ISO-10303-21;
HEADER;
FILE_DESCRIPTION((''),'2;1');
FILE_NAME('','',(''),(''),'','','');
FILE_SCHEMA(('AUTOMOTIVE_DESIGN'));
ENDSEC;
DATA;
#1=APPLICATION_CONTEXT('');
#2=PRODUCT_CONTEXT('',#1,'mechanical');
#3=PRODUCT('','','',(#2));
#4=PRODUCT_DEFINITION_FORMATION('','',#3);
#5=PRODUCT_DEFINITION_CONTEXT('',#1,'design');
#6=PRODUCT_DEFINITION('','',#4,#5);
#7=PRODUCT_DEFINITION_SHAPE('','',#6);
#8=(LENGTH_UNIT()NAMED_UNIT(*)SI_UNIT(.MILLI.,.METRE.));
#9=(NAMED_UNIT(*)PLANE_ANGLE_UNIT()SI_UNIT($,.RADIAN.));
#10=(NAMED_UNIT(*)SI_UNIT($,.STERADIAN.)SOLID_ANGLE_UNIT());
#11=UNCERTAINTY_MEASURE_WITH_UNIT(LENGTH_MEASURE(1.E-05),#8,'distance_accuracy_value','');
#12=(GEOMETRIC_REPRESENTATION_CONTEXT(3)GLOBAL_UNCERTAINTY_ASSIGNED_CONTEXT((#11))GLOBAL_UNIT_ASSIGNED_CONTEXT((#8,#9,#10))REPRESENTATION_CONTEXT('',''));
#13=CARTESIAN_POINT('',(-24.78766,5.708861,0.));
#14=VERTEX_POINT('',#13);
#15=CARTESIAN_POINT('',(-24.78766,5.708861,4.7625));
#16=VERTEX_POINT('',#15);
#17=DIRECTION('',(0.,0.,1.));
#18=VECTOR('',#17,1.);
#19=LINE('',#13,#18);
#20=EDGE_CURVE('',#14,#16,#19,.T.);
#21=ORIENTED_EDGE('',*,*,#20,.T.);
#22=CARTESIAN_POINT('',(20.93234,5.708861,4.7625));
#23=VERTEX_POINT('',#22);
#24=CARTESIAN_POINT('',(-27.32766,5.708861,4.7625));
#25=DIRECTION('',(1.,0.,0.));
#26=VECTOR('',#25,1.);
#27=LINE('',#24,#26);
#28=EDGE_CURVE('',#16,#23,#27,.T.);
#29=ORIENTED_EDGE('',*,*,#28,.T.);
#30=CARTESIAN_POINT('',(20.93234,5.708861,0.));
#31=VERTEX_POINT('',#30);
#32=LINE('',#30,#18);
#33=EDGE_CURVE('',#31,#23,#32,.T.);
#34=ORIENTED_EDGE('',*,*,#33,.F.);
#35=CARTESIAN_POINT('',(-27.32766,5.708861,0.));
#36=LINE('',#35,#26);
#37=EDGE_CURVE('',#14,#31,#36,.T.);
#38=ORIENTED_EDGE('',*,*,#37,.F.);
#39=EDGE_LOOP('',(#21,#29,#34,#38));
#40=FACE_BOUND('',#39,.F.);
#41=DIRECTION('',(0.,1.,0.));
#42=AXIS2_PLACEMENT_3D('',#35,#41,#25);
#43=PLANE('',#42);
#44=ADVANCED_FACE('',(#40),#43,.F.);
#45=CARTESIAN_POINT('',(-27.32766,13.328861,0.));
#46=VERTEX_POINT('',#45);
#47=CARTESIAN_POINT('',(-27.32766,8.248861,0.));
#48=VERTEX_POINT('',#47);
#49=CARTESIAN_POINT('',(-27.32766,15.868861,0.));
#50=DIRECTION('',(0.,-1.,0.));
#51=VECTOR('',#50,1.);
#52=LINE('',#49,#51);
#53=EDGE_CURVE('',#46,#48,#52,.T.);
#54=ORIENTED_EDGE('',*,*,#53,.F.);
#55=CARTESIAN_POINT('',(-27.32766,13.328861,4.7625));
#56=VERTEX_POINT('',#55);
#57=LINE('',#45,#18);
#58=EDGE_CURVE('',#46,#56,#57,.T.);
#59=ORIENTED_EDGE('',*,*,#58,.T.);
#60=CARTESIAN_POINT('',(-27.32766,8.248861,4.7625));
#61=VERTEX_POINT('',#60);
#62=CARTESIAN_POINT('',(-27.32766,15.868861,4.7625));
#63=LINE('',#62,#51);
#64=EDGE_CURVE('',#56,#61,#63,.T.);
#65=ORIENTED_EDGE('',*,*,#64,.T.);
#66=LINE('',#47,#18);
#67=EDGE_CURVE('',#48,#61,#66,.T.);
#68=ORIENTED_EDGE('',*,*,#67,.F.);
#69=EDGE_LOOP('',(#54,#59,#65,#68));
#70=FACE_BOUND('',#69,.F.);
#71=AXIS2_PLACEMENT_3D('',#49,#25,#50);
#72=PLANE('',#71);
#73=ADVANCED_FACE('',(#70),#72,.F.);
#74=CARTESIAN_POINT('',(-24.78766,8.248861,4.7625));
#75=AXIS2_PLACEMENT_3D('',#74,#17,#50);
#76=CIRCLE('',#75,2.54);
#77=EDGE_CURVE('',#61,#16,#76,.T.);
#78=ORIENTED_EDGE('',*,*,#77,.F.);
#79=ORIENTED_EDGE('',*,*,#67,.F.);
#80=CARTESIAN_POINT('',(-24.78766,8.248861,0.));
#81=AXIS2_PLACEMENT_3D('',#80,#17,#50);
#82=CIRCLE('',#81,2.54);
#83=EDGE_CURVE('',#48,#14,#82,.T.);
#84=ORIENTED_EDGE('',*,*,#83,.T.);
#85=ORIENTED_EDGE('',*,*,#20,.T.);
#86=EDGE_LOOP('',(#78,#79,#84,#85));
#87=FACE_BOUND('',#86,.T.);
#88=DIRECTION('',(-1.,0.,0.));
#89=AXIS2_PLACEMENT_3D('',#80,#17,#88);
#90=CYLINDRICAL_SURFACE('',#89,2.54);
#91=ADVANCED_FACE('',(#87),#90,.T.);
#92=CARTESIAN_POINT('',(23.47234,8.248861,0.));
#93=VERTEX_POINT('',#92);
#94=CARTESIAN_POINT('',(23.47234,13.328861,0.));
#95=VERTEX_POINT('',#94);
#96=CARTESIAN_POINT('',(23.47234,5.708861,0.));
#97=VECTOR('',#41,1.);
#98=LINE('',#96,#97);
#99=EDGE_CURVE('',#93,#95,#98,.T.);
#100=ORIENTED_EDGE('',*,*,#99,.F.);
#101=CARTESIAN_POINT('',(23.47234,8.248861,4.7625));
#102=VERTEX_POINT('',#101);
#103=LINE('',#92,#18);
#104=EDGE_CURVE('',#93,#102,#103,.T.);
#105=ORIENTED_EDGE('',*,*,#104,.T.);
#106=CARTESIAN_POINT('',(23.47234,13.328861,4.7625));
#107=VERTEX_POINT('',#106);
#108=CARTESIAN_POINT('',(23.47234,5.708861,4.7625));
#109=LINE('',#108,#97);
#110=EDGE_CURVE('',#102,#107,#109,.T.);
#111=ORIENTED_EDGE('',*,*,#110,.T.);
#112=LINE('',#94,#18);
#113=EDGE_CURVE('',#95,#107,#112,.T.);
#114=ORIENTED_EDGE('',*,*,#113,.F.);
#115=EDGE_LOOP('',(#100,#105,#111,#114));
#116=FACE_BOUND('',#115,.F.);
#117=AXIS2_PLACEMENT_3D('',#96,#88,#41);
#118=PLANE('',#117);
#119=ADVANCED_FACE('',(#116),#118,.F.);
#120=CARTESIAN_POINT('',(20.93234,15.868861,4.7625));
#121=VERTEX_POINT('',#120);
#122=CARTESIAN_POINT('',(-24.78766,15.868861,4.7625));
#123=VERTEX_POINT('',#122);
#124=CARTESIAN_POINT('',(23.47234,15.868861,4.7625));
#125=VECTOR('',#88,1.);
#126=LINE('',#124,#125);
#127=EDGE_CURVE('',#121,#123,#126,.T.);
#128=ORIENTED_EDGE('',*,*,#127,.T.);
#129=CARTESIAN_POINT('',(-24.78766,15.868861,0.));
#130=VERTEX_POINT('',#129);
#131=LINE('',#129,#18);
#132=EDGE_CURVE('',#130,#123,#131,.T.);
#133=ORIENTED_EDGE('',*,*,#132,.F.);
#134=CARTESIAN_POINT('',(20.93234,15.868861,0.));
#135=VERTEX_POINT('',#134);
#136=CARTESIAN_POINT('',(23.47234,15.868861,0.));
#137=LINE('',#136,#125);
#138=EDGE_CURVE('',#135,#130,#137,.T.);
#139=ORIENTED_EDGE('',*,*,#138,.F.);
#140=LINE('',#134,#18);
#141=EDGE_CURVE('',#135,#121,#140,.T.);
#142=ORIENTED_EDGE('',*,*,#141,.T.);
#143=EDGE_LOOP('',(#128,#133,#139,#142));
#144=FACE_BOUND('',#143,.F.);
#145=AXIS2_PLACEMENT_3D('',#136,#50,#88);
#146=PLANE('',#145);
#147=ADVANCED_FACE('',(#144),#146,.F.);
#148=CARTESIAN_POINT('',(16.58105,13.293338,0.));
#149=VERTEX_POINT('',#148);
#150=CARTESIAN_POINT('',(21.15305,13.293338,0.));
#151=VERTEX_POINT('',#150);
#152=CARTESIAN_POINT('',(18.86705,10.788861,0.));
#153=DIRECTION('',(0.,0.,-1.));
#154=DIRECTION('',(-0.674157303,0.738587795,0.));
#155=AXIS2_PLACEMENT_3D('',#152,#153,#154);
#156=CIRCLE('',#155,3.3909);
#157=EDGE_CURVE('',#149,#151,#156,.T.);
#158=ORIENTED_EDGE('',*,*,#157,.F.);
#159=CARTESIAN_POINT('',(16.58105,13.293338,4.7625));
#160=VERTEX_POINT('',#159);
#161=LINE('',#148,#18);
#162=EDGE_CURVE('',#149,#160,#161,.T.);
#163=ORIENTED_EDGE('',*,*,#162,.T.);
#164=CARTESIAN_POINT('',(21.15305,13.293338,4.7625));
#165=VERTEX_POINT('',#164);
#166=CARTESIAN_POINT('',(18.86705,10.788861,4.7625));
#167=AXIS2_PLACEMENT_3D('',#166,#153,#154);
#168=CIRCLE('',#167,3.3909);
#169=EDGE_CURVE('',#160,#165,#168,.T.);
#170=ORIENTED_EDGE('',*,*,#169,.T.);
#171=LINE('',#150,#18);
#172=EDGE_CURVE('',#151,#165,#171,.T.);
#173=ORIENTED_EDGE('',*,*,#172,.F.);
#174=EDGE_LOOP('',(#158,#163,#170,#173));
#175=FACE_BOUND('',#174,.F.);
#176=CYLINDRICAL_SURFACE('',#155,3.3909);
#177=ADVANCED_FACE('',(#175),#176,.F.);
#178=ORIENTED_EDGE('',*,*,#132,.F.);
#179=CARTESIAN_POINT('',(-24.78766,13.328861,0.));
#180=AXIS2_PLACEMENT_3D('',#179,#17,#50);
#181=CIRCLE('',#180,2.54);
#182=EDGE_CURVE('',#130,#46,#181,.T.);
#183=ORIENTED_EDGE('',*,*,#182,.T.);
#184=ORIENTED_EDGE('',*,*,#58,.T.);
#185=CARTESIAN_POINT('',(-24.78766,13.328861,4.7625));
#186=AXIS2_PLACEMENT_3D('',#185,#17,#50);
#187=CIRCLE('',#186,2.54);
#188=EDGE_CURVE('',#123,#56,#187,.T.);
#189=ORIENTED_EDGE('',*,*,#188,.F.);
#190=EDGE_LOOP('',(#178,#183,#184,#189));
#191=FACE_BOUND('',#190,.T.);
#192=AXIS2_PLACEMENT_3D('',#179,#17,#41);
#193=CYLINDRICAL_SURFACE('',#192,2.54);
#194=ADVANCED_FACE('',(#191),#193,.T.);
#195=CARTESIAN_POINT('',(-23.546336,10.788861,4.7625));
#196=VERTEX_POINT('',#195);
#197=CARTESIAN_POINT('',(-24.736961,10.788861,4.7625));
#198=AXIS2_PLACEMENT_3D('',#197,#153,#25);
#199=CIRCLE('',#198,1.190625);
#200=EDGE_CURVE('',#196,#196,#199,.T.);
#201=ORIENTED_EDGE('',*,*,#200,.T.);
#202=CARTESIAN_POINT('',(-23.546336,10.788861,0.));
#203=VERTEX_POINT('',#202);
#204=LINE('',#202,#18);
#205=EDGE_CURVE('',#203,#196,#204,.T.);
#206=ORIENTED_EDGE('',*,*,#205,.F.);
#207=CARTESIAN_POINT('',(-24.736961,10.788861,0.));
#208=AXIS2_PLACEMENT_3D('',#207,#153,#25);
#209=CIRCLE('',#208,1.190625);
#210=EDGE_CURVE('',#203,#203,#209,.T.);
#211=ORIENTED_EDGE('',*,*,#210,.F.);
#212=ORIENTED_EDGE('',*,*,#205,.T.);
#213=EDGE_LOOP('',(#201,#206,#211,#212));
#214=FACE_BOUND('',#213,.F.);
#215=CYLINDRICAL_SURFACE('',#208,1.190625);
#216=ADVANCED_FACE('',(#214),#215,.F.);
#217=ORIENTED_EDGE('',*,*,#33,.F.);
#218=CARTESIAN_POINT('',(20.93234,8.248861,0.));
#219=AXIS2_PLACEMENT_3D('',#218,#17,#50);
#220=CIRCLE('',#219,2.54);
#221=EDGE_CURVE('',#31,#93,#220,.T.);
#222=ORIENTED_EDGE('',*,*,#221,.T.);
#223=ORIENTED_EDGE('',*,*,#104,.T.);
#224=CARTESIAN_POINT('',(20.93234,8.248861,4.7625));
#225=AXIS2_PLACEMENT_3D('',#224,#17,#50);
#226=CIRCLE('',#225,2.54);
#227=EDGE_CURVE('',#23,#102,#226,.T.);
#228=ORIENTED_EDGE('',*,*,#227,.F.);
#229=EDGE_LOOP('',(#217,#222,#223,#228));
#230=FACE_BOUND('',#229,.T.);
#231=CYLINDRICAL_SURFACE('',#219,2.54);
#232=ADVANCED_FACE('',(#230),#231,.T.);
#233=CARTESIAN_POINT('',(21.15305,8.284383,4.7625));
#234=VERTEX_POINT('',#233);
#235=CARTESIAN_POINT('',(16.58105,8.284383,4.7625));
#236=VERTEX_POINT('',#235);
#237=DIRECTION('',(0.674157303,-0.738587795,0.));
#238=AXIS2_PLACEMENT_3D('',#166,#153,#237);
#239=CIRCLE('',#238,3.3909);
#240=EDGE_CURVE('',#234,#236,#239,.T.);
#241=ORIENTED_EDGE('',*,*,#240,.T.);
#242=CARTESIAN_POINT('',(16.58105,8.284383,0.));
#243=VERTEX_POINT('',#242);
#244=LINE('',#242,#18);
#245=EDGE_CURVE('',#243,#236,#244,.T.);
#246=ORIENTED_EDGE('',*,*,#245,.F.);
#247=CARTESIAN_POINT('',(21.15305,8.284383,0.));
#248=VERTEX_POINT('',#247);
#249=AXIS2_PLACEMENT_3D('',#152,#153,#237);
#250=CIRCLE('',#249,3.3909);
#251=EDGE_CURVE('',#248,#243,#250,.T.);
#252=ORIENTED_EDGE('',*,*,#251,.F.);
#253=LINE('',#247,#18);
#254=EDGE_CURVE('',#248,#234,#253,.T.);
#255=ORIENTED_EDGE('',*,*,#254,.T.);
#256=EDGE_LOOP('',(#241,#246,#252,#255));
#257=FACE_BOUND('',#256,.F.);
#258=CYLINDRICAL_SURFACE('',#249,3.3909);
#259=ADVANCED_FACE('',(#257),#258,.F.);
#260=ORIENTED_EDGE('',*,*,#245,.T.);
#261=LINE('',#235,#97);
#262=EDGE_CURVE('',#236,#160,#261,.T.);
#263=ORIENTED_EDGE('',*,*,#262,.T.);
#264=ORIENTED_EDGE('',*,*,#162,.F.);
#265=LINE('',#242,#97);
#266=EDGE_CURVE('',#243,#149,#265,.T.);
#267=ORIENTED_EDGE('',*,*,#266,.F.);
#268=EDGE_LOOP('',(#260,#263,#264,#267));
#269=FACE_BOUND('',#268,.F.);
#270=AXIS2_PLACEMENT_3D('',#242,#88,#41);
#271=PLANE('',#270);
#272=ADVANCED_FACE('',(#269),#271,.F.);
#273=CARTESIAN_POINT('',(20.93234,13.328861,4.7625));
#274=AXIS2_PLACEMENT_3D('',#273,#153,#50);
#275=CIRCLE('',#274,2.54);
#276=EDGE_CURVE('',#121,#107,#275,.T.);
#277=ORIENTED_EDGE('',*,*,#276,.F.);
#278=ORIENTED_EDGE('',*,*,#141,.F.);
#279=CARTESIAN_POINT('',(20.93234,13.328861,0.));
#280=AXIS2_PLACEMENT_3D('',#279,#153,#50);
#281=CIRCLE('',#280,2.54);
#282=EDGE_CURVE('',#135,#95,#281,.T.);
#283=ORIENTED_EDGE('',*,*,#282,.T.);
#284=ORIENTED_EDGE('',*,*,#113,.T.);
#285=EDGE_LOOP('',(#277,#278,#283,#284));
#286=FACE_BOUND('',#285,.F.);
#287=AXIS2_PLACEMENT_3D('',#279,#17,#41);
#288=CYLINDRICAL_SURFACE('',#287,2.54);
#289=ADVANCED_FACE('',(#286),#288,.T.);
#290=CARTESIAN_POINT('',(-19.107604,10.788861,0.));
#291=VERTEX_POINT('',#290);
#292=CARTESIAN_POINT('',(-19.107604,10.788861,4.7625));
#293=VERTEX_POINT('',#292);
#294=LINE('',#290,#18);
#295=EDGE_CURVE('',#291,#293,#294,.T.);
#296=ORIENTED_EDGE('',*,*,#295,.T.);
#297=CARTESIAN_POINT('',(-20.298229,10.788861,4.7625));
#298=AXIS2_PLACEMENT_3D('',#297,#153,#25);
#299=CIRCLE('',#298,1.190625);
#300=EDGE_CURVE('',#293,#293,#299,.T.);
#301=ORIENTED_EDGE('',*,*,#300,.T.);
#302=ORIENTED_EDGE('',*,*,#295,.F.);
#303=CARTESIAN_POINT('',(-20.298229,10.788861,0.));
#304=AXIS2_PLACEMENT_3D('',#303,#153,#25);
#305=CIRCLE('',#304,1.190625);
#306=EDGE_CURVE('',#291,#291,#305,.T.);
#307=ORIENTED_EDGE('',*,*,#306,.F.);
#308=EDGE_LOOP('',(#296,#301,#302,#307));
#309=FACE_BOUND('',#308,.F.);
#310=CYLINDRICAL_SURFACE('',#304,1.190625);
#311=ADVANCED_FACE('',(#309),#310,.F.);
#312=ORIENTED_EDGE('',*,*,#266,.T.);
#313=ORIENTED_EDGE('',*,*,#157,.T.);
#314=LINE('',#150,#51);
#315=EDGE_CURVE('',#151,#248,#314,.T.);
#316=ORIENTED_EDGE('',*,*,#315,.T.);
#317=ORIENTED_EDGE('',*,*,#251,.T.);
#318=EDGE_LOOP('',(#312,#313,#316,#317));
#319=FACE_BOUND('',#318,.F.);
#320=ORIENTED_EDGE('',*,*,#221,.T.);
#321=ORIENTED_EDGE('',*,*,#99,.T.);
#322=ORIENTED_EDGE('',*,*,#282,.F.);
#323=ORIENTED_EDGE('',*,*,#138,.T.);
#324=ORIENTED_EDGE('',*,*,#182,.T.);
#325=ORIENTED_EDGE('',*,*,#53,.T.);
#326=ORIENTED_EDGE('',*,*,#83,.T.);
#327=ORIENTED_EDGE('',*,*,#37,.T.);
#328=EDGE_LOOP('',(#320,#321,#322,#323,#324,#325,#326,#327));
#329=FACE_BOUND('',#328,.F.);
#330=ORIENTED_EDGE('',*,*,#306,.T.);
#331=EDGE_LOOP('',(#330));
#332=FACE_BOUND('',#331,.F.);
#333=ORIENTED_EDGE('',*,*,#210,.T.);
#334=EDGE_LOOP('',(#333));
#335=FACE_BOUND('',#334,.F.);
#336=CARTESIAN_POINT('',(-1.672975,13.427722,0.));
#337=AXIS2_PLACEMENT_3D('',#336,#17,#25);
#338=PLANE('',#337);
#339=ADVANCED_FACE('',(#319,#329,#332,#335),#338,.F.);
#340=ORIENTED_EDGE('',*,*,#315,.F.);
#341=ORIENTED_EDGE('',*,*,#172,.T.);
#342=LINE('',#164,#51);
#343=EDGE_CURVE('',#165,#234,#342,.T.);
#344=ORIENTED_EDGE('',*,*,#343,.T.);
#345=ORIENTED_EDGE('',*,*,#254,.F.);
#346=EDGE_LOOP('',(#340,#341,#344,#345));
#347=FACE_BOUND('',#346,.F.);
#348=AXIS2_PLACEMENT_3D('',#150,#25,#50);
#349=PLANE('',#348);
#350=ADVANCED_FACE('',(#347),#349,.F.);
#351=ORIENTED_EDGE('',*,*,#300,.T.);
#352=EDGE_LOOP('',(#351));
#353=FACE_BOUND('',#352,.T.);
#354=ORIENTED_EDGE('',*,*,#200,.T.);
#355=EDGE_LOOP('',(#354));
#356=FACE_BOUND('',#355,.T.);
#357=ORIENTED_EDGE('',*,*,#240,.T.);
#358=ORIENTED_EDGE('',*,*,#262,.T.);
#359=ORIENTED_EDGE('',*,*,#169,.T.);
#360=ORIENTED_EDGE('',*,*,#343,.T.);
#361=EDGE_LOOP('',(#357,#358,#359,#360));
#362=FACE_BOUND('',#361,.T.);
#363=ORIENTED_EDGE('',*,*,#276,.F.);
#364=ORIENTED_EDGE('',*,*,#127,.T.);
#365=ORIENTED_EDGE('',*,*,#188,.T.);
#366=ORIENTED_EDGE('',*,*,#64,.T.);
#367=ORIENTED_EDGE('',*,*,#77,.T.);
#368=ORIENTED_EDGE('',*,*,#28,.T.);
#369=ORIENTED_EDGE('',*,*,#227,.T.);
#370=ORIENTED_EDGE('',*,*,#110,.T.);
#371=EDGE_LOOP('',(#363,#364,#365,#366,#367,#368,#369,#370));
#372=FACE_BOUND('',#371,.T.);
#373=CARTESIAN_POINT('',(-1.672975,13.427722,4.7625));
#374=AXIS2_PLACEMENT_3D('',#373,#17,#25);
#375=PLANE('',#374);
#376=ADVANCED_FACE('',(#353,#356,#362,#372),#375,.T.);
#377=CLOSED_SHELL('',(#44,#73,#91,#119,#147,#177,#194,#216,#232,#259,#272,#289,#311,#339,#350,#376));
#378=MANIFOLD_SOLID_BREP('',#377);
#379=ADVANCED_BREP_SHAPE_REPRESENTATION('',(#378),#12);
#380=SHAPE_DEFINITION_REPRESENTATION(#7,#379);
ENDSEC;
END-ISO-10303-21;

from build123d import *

# Parameters (mm, degrees)
F1_DEPTH = 4.7625
F2_R     = 2.54


# Not quite as in the source:
# - a length typed as a fraction of an inch, garbled in the dataset ("3 / 203.2 mm" for 3/8 in), is restored


with BuildPart() as f1:
    # F0 (on Top) → F1 (new body)
    with BuildSketch(Plane.XY):
        with BuildLine():
            Line((23.4723398992, 10.7888607308), (23.4723398992, 15.8688607308))
            Line((23.4723398992, 15.8688607308), (-27.3276601008, 15.8688607308))
            Line((-27.3276601008, 15.8688607308), (-27.3276601008, 10.7888607308))
            Line((-27.3276601008, 10.7888607308), (-25.9275856725, 10.7888607308))
            ThreePointArc((-25.9275856725, 10.7888607308), (-24.7369606725, 11.9794857308), (-23.5463356725, 10.7888607308))
            Line((-23.5463356725, 10.7888607308), (-21.4888538531, 10.7888607308))
            ThreePointArc((-21.4888538531, 10.7888607308), (-20.2982288531, 11.9794857308), (-19.1076038531, 10.7888607308))
            Line((-19.1076038531, 10.7888607308), (15.4761500436, 10.7888607308))
            ThreePointArc((15.4761500436, 10.7888607308), (15.7646477316, 12.1575472198), (16.5810500436, 13.2933380835))
            ThreePointArc((16.5810500436, 13.2933380835), (18.8670500436, 14.1797607308), (21.1530500436, 13.2933380835))
            ThreePointArc((21.1530500436, 13.2933380835), (21.9694523555, 12.1575472198), (22.2579500436, 10.7888607308))
            Line((22.2579500436, 10.7888607308), (23.4723398992, 10.7888607308))
        make_face()
        with BuildLine():
            Line((23.4723398992, 5.7088607308), (23.4723398992, 10.7888607308))
            Line((23.4723398992, 10.7888607308), (22.2579500436, 10.7888607308))
            ThreePointArc((22.2579500436, 10.7888607308), (21.9694523555, 9.4201742419), (21.1530500436, 8.2843833782))
            ThreePointArc((21.1530500436, 8.2843833782), (18.8670500436, 7.3979607308), (16.5810500436, 8.2843833782))
            ThreePointArc((16.5810500436, 8.2843833782), (15.7646477316, 9.4201742419), (15.4761500436, 10.7888607308))
            Line((15.4761500436, 10.7888607308), (-19.1076038531, 10.7888607308))
            ThreePointArc((-19.1076038531, 10.7888607308), (-20.2982288531, 9.5982357308), (-21.4888538531, 10.7888607308))
            Line((-21.4888538531, 10.7888607308), (-23.5463356725, 10.7888607308))
            ThreePointArc((-23.5463356725, 10.7888607308), (-24.7369606725, 9.5982357308), (-25.9275856725, 10.7888607308))
            Line((-25.9275856725, 10.7888607308), (-27.3276601008, 10.7888607308))
            Line((-27.3276601008, 10.7888607308), (-27.3276601008, 5.7088607308))
            Line((-27.3276601008, 5.7088607308), (23.4723398992, 5.7088607308))
        make_face()
        with BuildLine():
            Line((16.5810500436, 8.2843833782), (16.5810500436, 10.7888607308))
            Line((16.5810500436, 10.7888607308), (15.4761500436, 10.7888607308))
            ThreePointArc((15.4761500436, 10.7888607308), (15.7646477316, 9.4201742419), (16.5810500436, 8.2843833782))
        make_face()
        with BuildLine():
            Line((15.4761500436, 10.7888607308), (16.5810500436, 10.7888607308))
            Line((16.5810500436, 10.7888607308), (16.5810500436, 13.2933380835))
            ThreePointArc((16.5810500436, 13.2933380835), (15.7646477316, 12.1575472198), (15.4761500436, 10.7888607308))
        make_face()
        with BuildLine():
            Line((21.1530500436, 10.7888607308), (22.2579500436, 10.7888607308))
            ThreePointArc((22.2579500436, 10.7888607308), (21.9694523555, 12.1575472198), (21.1530500436, 13.2933380835))
            Line((21.1530500436, 13.2933380835), (21.1530500436, 10.7888607308))
        make_face()
        with BuildLine():
            ThreePointArc((21.1530500436, 8.2843833782), (21.9694523555, 9.4201742419), (22.2579500436, 10.7888607308))
            Line((22.2579500436, 10.7888607308), (21.1530500436, 10.7888607308))
            Line((21.1530500436, 10.7888607308), (21.1530500436, 8.2843833782))
        make_face()
    extrude(amount=F1_DEPTH)

    # F2
    f2_edges = [f1.edges().sort_by_distance(p)[0] for p in [
        (23.47234, 15.868861, 2.38125),
        (-27.32766, 15.868861, 2.38125),
        (-27.32766, 5.708861, 2.38125),
        (23.47234, 5.708861, 2.38125),
    ]]
    fillet(f2_edges, radius=F2_R)


solid = f1.part
